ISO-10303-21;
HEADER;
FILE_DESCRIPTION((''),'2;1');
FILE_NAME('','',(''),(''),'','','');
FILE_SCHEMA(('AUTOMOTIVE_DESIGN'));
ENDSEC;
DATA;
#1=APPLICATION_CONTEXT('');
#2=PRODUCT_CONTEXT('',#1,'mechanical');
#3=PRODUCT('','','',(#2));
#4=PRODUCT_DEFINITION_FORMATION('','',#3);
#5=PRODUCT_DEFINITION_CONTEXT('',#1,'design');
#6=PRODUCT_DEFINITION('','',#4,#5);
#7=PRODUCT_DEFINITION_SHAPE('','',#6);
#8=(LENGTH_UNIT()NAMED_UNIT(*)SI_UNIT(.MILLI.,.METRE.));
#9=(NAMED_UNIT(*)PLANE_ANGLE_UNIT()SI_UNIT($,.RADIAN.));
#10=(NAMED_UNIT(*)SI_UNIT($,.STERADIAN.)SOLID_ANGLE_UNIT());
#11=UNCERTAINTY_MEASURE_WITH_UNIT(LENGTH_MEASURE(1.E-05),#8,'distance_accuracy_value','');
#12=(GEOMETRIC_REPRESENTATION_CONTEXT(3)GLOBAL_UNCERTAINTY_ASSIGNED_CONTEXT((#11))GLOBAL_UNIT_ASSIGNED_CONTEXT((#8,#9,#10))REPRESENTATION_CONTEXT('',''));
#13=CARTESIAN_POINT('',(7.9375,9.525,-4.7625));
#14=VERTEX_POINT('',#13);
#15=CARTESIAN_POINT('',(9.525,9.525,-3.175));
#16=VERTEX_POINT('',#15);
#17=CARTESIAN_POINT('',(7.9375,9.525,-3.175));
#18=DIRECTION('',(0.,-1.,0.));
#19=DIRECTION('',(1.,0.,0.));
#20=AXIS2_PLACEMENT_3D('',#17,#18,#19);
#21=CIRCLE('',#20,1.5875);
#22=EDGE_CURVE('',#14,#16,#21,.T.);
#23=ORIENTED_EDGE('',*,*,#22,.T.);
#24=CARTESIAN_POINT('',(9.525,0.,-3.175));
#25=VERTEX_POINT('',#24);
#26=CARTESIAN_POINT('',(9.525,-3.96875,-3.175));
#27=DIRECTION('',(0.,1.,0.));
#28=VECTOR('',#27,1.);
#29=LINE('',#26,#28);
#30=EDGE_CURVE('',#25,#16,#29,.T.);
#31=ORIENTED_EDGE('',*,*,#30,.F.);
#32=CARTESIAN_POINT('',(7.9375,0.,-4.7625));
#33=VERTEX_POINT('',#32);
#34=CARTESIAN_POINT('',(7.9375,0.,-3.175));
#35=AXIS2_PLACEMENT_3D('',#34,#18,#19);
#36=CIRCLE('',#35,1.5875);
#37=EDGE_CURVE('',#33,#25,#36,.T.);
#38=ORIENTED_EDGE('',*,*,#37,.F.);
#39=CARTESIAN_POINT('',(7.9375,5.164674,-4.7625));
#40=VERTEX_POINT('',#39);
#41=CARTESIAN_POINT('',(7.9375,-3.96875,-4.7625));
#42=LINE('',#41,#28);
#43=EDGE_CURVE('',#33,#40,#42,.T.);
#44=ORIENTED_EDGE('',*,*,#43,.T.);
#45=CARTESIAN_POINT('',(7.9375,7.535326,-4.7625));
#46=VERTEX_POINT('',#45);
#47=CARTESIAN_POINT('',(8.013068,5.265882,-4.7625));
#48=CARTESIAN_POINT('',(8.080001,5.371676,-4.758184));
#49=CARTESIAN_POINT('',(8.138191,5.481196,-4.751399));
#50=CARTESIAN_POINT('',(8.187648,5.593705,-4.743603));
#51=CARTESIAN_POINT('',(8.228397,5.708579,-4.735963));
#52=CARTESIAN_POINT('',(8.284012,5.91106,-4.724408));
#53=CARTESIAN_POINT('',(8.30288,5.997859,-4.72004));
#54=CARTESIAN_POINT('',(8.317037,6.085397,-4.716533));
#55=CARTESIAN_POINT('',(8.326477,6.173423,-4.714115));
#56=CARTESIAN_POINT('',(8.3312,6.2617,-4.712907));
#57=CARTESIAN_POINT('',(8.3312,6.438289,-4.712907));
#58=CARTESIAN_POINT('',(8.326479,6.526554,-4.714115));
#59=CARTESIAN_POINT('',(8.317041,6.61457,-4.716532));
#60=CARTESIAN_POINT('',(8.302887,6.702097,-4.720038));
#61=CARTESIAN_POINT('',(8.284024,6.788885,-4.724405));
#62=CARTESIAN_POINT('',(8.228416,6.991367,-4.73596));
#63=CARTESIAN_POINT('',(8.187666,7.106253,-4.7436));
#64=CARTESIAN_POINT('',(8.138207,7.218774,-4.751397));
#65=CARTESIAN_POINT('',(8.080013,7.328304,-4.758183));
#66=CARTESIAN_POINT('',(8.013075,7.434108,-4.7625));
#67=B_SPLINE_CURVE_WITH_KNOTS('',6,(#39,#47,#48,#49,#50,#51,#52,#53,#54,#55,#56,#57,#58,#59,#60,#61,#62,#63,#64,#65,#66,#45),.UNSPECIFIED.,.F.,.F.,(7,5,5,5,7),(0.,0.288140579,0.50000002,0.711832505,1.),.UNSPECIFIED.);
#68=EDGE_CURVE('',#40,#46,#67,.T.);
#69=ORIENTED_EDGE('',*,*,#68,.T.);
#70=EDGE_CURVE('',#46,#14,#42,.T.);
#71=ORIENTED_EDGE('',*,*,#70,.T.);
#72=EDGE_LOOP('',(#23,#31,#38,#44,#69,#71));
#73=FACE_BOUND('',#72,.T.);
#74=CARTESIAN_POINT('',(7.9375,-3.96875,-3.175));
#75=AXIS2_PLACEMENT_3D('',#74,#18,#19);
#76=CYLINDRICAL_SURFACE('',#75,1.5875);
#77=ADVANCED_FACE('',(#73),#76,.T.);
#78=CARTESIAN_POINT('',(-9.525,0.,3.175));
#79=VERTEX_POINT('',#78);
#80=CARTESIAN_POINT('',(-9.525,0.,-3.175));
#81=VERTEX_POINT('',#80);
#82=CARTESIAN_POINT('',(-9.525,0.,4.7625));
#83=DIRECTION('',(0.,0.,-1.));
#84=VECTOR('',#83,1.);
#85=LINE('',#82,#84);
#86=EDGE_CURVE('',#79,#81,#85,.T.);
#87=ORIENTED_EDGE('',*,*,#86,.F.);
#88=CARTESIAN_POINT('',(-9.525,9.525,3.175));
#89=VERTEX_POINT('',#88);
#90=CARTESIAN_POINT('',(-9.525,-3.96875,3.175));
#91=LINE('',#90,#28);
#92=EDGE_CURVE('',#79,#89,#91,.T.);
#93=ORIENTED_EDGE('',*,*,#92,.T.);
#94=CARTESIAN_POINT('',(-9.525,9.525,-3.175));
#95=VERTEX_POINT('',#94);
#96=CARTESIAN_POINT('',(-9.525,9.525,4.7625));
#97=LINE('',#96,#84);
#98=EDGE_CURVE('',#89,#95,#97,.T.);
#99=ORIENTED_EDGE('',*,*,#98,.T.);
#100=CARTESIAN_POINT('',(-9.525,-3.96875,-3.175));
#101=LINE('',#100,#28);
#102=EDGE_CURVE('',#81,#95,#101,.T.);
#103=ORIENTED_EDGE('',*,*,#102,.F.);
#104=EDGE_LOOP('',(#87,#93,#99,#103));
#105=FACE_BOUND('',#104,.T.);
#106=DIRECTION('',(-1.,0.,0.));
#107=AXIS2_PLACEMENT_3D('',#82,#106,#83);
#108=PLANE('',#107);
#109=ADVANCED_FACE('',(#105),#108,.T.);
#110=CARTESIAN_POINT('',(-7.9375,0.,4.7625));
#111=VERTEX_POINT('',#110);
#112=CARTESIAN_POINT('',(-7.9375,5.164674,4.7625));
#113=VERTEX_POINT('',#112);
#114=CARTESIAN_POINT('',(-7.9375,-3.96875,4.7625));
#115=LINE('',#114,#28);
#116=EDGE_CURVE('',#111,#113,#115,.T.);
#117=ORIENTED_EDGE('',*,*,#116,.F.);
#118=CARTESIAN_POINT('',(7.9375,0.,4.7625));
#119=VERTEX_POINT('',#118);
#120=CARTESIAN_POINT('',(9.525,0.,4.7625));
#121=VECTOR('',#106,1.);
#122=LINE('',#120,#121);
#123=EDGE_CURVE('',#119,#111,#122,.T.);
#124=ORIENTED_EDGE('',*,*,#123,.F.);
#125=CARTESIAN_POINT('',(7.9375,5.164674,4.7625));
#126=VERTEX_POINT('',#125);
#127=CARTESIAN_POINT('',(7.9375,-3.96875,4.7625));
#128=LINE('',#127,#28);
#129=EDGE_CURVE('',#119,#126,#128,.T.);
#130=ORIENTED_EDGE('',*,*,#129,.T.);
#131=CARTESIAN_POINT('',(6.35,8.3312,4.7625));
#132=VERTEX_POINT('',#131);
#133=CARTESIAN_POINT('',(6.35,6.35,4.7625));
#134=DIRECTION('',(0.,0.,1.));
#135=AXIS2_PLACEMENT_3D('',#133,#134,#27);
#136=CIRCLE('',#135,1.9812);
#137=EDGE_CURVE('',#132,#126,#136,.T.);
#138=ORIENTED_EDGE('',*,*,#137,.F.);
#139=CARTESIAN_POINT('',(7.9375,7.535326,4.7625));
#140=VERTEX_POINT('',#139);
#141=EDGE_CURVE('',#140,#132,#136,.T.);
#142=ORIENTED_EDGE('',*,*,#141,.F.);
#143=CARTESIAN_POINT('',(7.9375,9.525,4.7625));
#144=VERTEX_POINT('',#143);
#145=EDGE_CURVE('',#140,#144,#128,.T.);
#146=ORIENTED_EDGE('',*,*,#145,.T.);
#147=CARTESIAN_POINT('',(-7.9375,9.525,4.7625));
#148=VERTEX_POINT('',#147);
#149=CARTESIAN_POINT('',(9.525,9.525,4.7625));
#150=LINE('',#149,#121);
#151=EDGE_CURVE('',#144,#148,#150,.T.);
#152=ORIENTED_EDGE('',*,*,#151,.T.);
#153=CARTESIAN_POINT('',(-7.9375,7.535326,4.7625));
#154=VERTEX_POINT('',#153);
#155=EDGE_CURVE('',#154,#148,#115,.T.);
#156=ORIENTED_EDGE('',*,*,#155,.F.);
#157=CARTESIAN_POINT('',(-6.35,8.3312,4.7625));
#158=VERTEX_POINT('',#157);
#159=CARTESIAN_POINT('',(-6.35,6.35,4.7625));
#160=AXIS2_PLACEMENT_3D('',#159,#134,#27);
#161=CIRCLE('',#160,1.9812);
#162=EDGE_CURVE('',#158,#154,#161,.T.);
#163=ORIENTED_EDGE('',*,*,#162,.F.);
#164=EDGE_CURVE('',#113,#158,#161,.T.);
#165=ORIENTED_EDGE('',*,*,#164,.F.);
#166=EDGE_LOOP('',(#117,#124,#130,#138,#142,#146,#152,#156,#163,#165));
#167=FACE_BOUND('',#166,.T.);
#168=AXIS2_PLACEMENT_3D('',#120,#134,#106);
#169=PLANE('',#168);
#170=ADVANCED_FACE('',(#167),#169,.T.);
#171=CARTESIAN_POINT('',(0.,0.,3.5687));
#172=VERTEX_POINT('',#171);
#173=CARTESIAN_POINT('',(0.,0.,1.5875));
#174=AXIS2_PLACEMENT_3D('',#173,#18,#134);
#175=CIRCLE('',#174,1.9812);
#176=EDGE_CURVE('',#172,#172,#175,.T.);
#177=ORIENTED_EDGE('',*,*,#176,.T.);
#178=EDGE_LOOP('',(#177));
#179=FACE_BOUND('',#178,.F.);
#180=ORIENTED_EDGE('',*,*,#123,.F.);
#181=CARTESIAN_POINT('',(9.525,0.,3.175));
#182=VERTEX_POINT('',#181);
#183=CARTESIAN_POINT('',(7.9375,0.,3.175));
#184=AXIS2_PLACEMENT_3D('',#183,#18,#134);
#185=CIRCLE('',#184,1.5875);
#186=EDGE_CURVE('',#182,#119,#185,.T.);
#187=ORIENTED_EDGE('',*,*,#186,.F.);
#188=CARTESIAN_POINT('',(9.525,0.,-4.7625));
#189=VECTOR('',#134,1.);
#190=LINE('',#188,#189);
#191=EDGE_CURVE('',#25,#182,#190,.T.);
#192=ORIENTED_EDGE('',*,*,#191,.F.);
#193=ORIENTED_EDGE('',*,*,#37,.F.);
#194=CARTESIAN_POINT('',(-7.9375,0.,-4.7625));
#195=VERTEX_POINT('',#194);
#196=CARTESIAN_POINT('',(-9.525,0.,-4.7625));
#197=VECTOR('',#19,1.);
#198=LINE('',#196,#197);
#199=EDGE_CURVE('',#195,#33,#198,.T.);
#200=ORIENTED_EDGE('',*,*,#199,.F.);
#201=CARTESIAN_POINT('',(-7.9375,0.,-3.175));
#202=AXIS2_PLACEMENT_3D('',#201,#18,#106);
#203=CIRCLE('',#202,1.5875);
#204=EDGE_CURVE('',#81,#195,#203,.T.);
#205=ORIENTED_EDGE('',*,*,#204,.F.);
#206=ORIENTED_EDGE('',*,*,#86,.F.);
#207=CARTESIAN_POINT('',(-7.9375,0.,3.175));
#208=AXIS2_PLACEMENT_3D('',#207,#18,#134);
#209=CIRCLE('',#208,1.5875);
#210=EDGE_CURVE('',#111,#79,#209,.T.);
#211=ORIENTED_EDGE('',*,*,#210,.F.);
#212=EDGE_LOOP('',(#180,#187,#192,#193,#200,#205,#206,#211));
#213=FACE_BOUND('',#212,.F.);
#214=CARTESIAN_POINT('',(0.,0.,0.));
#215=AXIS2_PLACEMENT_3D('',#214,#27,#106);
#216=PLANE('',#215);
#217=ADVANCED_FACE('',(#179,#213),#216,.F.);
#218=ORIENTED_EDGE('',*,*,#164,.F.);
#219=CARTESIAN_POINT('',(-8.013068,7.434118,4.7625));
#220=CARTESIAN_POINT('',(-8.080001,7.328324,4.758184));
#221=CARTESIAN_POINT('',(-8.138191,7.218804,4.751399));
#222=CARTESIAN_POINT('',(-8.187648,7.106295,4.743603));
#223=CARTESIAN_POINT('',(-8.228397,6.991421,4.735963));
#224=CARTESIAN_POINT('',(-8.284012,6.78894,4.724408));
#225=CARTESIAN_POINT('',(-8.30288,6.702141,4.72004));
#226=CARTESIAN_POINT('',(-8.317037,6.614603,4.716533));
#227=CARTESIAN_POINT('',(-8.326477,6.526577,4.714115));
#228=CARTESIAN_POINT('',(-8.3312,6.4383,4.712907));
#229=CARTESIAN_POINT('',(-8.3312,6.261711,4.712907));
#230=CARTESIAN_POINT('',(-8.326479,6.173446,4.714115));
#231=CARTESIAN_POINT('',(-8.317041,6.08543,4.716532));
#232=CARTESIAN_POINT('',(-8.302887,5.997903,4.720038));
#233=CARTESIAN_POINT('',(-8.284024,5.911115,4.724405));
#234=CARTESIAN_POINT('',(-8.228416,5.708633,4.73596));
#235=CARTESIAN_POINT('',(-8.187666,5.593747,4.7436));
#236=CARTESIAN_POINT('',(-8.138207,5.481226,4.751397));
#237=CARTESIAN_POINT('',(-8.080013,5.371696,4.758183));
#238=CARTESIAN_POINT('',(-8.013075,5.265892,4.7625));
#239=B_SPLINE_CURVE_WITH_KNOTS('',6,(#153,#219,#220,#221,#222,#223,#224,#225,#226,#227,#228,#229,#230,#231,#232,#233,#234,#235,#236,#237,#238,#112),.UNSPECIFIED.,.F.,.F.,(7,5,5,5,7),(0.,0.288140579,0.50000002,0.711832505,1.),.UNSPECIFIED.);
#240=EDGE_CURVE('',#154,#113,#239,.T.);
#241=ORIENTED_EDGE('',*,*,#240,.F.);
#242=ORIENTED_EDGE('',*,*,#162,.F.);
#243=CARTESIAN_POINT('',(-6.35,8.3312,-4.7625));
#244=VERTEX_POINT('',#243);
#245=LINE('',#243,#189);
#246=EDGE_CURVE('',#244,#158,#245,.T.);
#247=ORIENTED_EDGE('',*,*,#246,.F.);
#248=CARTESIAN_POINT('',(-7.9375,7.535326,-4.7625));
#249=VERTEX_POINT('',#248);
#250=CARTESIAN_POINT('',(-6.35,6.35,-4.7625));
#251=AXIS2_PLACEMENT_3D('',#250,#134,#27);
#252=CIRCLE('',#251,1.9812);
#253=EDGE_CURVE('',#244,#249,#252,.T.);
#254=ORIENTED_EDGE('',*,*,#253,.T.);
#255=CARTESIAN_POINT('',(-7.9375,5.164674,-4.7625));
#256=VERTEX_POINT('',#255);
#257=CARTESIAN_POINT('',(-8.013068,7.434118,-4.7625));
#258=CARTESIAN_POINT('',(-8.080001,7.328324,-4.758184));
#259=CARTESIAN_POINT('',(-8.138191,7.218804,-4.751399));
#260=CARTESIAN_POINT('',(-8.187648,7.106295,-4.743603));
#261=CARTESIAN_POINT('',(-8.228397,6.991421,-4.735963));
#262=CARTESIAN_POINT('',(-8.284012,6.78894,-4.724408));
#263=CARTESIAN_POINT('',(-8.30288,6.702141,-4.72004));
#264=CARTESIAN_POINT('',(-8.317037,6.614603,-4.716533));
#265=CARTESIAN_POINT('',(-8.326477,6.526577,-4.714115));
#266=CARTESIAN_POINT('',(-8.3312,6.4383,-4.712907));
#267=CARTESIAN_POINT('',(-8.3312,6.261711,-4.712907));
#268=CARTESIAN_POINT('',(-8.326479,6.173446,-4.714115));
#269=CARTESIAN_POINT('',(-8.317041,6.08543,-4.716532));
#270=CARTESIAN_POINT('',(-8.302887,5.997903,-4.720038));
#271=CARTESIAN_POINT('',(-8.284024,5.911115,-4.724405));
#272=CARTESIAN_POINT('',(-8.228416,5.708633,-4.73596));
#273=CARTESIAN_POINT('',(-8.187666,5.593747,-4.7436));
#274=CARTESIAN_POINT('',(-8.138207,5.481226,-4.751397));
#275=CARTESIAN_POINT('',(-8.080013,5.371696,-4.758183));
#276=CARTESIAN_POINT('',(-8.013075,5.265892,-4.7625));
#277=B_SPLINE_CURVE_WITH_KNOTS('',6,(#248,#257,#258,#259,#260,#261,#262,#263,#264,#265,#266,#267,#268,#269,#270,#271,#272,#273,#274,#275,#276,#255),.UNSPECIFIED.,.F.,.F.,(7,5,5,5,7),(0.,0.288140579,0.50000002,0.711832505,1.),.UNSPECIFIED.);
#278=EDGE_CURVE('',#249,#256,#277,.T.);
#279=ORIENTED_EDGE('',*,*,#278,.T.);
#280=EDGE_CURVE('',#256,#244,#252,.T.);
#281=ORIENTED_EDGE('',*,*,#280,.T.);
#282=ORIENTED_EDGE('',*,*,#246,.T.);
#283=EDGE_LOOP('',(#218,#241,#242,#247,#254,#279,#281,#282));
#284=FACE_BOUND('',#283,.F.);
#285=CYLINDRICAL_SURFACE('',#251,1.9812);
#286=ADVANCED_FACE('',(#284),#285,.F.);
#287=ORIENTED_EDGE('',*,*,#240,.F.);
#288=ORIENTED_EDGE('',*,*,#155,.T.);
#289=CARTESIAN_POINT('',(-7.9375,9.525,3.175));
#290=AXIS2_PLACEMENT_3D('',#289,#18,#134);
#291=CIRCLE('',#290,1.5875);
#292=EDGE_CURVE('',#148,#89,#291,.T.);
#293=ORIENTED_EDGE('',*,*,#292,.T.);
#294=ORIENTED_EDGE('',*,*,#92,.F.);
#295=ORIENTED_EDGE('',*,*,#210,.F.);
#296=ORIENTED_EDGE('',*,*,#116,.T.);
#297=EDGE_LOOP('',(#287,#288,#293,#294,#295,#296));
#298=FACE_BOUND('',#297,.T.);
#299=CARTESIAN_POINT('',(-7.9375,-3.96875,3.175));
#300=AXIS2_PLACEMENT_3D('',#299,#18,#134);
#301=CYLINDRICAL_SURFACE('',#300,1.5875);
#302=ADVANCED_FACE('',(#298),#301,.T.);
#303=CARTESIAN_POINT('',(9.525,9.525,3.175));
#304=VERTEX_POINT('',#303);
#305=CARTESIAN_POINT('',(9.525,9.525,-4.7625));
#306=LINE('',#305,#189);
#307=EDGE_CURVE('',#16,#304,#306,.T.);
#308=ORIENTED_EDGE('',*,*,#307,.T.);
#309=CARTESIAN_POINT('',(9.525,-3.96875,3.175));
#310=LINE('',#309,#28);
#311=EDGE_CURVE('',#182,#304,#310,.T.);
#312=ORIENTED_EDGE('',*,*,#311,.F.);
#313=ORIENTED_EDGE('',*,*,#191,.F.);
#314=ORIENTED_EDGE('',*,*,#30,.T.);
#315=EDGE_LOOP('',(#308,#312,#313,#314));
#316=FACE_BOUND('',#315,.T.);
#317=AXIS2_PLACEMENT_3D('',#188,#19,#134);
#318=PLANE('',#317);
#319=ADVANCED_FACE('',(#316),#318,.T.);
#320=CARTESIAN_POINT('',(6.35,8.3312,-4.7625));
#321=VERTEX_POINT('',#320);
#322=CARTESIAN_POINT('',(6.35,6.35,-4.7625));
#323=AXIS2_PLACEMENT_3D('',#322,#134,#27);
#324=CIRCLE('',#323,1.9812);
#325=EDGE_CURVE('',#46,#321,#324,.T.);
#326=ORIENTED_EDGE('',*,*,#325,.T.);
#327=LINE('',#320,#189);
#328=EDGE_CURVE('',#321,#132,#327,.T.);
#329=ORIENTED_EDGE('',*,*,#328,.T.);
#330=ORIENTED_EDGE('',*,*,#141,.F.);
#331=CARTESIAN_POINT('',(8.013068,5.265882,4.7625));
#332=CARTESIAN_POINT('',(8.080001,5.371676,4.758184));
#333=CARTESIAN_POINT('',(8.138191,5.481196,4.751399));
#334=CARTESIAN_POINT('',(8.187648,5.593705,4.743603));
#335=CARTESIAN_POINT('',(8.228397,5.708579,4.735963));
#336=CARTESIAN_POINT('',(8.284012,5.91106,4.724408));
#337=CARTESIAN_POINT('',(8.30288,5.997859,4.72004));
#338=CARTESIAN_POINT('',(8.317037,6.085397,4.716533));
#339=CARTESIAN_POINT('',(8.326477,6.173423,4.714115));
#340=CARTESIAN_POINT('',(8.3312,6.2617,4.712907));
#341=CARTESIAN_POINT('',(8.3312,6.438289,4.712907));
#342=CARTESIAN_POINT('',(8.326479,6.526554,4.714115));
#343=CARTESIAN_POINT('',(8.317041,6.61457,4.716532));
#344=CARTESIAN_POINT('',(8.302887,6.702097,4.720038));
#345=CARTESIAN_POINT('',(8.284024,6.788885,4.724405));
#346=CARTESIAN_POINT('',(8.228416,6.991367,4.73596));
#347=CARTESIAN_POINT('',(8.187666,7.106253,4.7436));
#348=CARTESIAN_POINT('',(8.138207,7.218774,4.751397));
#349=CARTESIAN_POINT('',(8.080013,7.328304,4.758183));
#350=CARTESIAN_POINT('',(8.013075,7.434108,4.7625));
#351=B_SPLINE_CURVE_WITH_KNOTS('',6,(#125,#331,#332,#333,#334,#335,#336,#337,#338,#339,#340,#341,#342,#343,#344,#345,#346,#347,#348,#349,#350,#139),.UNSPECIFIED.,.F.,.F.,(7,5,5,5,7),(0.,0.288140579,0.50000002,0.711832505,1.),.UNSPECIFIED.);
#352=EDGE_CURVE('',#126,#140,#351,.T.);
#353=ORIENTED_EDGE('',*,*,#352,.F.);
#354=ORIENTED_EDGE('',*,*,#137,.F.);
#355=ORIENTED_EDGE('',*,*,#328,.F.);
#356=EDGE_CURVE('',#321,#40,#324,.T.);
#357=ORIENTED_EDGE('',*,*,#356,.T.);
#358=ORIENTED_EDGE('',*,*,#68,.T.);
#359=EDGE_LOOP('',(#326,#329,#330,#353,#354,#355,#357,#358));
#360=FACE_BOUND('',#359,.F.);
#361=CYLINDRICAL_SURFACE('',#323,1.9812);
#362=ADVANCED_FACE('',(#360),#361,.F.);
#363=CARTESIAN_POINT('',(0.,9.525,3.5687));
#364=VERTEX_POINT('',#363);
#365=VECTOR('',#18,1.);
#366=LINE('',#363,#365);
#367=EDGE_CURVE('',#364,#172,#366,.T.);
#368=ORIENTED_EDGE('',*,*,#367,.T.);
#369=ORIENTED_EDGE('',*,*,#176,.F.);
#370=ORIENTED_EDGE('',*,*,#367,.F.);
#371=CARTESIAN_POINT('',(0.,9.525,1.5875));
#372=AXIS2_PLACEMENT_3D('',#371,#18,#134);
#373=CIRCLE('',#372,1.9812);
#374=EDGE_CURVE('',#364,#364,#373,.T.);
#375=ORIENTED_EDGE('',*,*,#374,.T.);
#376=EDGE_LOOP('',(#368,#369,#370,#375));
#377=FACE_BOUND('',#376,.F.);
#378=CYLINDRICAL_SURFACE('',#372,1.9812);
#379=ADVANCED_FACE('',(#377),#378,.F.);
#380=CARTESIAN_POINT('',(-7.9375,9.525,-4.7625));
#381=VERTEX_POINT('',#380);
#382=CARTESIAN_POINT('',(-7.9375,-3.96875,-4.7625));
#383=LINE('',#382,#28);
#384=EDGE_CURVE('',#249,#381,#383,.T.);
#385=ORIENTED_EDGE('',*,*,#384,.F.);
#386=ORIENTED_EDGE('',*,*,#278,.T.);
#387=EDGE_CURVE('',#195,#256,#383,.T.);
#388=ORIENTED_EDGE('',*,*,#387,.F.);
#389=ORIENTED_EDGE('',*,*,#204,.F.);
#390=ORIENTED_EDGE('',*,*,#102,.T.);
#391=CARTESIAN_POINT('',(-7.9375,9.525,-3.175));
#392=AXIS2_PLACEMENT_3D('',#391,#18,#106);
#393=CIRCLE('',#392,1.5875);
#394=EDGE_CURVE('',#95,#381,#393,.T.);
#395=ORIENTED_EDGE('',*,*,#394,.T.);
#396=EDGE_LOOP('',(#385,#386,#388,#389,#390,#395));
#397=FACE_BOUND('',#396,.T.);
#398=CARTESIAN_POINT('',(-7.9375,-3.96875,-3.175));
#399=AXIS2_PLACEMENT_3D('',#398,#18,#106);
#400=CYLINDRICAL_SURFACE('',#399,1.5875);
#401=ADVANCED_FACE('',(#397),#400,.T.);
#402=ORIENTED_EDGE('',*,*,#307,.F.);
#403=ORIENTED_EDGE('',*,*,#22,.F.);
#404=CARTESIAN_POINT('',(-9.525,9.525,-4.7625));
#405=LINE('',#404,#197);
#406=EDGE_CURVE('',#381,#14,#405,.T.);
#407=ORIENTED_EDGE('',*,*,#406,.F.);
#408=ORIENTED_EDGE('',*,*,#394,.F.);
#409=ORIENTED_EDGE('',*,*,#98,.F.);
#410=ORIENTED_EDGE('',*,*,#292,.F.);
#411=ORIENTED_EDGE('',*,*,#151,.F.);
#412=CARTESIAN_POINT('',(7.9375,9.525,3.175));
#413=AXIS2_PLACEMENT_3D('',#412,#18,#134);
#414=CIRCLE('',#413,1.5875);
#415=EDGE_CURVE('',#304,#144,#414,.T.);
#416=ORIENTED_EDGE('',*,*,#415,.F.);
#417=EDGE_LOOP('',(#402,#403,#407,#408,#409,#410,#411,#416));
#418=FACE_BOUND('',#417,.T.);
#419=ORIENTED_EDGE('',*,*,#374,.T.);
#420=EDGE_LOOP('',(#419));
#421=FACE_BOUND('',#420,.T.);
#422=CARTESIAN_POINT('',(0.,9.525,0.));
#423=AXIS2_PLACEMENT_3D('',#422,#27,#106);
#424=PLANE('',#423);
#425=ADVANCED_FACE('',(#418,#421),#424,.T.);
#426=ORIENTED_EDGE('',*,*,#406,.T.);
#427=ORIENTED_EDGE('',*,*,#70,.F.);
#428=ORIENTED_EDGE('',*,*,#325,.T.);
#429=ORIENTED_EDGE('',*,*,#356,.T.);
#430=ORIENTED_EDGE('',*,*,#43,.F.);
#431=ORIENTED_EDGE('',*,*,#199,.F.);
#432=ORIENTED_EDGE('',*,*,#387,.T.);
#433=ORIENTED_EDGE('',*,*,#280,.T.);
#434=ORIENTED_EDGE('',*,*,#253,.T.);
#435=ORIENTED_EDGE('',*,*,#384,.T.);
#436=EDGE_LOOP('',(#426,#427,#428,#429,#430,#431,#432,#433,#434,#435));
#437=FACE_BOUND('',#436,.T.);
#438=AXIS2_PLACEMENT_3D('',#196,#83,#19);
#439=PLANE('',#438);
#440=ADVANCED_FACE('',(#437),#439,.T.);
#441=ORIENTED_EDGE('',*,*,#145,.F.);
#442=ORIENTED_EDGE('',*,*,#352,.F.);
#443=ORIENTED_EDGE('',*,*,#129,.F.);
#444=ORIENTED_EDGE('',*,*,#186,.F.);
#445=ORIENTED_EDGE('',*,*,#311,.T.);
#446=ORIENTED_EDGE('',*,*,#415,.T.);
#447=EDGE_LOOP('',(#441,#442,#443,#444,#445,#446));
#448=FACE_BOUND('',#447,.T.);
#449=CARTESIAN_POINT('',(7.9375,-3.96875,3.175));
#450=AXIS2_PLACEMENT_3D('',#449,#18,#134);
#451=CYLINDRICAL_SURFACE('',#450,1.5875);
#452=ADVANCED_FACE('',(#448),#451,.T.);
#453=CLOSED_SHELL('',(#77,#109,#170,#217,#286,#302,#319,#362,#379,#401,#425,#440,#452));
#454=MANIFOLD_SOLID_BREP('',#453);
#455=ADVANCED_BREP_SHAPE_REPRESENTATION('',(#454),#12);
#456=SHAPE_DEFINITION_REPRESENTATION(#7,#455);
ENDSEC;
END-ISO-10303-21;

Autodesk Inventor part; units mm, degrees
ref_plane "YZ Plane" through (0, 0, 0) normal (1, 0, 0) x (0, 1, 0)
ref_plane "XZ Plane" through (0, 0, 0) normal (0, 1, 0) x (-1, 0, 0)
ref_plane "XY Plane" through (0, 0, 0) normal (0, 0, 1) x (1, 0, 0)
sketch "Sketch1" plane through (0, 0, 0) normal (0, 1, 0) x (-1, 0, 0)
  line L0 (-9.525, 4.7625) -> (9.525, 4.7625)
  line L1 (9.525, 4.7625) -> (9.525, -4.7625)
  line L2 (9.525, -4.7625) -> (-9.525, -4.7625)
  line L3 (-9.525, -4.7625) -> (-9.525, 4.7625)
  line L4 (-9.525, 4.7625) -> (9.525, -4.7625) construction
  line L5 (9.525, 4.7625) -> (-9.525, -4.7625) construction
  point P0 (0, 0)
  dimension "d0" = 19.05
  dimension "d1" = 9.525
extrude "Plate1" add sketch "Sketch1" along normal blind 9.525
sketch "Sketch2" plane through (9.525, 0, -4.7625) normal (0, 0, -1) x (-1, 0, 0)
  line L0 (0, 0) -> (19.05, 0) construction
  line L1 (9.525, 0) -> (9.525, 9.525) construction
  line L2 (19.05, 9.525) -> (0, 9.525) construction
  point P0 (3.175, 6.35)
  point P1 (15.875, 6.35)
  dimension "d3" = 12.7
  dimension "d4" = 6.35
hole "Hole1" at (6.35, 6.35, -4.7625) at (-6.35, 6.35, -4.7625) direction (0, 0, 1) diameter 3.9624 end through all thread size "10-32 UNF" class "2B" standard "ANSI Unified Screw Threads"
sketch "Sketch3" plane through (0, 9.525, 0) normal (0, 1, 0) x (1, 0, 0)
  line L0 (-9.525, 4.7625) -> (9.525, 4.7625) projected
  point P0 (0, 0)
  point P1 (0, -1.5875)
  dimension "d19" = 6.35
hole "Hole2" at (0, 9.525, 1.5875) direction (0, -1, 0) diameter 3.9624 end through all thread size "10-32 UNF" class "2B" standard "ANSI Unified Screw Threads"
fillet "Corner Round1" radius 1.5875 4 edges at (-9.525, 4.7625, -4.7625) (-9.525, 4.7625, 4.7625) (9.525, 4.7625, -4.7625) (9.525, 4.7625, 4.7625)
equation "\"d10\" = Thickness"
equation "\"d2\" = Thickness"
equation "\"BendRadius\" = Thickness"
equation "\"BendReliefWidth\" = Thickness"
equation "\"BendReliefDepth\" = 0.5 * Thickness"
equation "\"CornerReliefSize\" = 4 * Thickness"
equation "\"MinimumRemnant\" = 2 * Thickness"
equation "\"TransitionRadius\" = BendRadius"
equation "\"JacobiRadiusSize\" = BendRadius"
equation "\"GapSize\" = Thickness"
equation "\"Thickness\" = 9.525"
properties part number "PLATE,NUTBLOCK,BACK" material "Aluminum 6061"
